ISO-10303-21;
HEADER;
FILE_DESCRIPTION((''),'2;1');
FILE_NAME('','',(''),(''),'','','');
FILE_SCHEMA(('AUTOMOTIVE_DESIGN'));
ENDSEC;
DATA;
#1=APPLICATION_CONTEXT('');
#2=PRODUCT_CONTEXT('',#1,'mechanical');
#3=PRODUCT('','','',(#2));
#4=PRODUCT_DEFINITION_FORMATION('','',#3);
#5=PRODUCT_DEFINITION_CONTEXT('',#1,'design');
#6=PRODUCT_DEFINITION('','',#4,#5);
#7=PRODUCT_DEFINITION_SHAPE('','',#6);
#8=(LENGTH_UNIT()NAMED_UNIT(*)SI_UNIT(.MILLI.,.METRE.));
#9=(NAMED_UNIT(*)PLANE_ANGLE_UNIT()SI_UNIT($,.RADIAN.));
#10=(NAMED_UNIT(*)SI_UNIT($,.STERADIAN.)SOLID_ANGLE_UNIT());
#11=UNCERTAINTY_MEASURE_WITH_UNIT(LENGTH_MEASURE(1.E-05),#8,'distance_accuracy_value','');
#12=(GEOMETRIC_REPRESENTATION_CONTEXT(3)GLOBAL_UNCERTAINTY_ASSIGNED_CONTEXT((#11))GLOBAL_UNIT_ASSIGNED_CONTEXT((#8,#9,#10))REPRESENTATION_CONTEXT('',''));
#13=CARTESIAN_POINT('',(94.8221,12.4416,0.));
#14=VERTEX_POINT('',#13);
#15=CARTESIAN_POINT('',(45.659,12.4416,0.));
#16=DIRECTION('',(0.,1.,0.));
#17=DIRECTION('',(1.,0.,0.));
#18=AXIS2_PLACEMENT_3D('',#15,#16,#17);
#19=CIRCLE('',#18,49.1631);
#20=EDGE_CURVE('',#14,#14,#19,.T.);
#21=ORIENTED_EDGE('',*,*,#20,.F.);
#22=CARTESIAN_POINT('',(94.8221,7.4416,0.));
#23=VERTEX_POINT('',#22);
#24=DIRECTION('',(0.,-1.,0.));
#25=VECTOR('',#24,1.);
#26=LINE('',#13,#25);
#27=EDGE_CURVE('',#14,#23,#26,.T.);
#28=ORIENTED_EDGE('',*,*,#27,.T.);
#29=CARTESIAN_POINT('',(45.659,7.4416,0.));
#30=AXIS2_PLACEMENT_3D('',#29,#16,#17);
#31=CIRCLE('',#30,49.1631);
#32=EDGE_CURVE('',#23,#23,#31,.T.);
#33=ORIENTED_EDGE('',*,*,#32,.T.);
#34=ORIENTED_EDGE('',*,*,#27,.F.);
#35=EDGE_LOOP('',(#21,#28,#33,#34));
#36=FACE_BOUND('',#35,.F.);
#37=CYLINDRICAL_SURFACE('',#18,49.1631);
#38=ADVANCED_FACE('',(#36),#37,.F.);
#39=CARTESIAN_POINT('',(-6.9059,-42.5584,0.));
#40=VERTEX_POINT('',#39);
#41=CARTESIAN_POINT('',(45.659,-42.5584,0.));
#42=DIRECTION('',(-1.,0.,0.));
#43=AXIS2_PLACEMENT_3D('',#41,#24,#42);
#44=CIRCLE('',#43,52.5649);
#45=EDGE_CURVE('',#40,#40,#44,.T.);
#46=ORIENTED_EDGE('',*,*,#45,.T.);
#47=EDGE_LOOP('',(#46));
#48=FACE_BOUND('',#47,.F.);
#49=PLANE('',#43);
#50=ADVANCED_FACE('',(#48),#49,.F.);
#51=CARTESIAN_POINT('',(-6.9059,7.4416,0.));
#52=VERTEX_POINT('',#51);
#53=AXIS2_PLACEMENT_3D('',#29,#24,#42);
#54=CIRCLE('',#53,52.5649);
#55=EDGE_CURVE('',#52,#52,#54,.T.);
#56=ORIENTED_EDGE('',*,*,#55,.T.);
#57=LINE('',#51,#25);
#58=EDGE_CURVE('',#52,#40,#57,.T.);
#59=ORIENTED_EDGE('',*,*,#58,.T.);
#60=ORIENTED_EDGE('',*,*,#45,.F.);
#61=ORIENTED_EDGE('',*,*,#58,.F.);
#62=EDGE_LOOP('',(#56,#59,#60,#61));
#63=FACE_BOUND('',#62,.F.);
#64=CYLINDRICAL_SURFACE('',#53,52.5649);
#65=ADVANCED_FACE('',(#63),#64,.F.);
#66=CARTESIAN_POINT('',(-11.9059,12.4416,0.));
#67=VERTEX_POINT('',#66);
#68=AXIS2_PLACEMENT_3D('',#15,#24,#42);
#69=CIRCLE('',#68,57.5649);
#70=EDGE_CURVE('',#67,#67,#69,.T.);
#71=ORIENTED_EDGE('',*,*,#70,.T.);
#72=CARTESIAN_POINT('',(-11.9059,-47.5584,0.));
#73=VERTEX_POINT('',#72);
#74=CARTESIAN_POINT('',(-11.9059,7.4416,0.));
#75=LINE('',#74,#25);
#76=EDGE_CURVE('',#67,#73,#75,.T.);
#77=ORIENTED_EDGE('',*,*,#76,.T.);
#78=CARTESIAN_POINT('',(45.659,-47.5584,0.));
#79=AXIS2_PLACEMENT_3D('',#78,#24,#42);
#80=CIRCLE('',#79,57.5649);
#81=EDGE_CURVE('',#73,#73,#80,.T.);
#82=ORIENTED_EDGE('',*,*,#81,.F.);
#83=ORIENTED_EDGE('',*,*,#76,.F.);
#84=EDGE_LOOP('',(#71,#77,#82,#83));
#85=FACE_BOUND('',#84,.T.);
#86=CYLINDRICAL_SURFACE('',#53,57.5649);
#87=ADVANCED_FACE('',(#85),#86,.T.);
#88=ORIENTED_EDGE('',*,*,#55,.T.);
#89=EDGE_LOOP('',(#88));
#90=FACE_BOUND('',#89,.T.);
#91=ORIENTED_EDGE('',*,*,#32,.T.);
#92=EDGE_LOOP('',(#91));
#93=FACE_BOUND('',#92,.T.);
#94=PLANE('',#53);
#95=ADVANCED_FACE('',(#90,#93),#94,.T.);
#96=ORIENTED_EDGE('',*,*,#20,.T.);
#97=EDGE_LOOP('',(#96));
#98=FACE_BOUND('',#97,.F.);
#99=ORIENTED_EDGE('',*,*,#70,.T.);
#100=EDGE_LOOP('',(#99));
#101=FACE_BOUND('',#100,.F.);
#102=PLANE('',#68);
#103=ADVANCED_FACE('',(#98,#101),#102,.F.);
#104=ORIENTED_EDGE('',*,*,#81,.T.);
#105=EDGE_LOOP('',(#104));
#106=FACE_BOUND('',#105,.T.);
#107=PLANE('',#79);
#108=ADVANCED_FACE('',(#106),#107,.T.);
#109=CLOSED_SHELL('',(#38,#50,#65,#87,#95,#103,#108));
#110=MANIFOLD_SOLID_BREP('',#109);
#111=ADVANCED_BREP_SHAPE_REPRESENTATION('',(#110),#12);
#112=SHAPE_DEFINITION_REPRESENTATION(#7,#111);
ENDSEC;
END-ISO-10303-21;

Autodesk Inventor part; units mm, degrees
ref_plane "YZ Plane" through (0, 0, 0) normal (1, 0, 0) x (0, 1, 0)
ref_plane "XZ Plane" through (0, 0, 0) normal (0, 1, 0) x (-1, 0, 0)
ref_plane "XY Plane" through (0, 0, 0) normal (0, 0, 1) x (1, 0, 0)
sketch "Sketch1" plane through (0, 0, 0) normal (0, 0, 1) x (1, 0, 0)
  line L0 (-6.9059, 7.4416) -> (-6.9059, -42.5584)
  line L1 (-6.9059, -42.5584) -> (45.659, -42.5584)
  line L2 (45.659, -42.5584) -> (-4.341, -42.5584)
  line L3 (-6.9059, 7.4416) -> (45.659, 7.4416)
  line L4 (45.659, 7.4416) -> (45.659, -42.5584)
  point P0 (0, 0)
  dimension "d0" = 50
  dimension "d1" = 50
revolve "Revolution1" add sketch "Sketch1" angle 360 about axis through (45.659, 7.4416, 0) along (0, -1, 0)
shell "Shell1" thickness 5 outward yes removed faces 0
sketch "Sketch2" plane through (45.659, 12.4416, 0) normal (0, 1, 0) x (1, 0, 0)
  circle A0 centre (0, 0) radius 49.1631
  point P0 (-45.659, 0)
extrude "Extrusion1" cut sketch "Sketch2" against normal blind 45
equation "\"BendRadius\" = Thickness"
equation "\"BendReliefWidth\" = Thickness"
equation "\"BendReliefDepth\" = 0.5 * Thickness"
equation "\"CornerReliefSize\" = 4 * Thickness"
equation "\"MinimumRemnant\" = 2 * Thickness"
equation "\"TransitionRadius\" = BendRadius"
equation "\"JacobiRadiusSize\" = BendRadius"
equation "\"GapSize\" = Thickness"
equation "\"Thickness\" = 0.5"
properties part number "box" material "Steel, Carbon"
